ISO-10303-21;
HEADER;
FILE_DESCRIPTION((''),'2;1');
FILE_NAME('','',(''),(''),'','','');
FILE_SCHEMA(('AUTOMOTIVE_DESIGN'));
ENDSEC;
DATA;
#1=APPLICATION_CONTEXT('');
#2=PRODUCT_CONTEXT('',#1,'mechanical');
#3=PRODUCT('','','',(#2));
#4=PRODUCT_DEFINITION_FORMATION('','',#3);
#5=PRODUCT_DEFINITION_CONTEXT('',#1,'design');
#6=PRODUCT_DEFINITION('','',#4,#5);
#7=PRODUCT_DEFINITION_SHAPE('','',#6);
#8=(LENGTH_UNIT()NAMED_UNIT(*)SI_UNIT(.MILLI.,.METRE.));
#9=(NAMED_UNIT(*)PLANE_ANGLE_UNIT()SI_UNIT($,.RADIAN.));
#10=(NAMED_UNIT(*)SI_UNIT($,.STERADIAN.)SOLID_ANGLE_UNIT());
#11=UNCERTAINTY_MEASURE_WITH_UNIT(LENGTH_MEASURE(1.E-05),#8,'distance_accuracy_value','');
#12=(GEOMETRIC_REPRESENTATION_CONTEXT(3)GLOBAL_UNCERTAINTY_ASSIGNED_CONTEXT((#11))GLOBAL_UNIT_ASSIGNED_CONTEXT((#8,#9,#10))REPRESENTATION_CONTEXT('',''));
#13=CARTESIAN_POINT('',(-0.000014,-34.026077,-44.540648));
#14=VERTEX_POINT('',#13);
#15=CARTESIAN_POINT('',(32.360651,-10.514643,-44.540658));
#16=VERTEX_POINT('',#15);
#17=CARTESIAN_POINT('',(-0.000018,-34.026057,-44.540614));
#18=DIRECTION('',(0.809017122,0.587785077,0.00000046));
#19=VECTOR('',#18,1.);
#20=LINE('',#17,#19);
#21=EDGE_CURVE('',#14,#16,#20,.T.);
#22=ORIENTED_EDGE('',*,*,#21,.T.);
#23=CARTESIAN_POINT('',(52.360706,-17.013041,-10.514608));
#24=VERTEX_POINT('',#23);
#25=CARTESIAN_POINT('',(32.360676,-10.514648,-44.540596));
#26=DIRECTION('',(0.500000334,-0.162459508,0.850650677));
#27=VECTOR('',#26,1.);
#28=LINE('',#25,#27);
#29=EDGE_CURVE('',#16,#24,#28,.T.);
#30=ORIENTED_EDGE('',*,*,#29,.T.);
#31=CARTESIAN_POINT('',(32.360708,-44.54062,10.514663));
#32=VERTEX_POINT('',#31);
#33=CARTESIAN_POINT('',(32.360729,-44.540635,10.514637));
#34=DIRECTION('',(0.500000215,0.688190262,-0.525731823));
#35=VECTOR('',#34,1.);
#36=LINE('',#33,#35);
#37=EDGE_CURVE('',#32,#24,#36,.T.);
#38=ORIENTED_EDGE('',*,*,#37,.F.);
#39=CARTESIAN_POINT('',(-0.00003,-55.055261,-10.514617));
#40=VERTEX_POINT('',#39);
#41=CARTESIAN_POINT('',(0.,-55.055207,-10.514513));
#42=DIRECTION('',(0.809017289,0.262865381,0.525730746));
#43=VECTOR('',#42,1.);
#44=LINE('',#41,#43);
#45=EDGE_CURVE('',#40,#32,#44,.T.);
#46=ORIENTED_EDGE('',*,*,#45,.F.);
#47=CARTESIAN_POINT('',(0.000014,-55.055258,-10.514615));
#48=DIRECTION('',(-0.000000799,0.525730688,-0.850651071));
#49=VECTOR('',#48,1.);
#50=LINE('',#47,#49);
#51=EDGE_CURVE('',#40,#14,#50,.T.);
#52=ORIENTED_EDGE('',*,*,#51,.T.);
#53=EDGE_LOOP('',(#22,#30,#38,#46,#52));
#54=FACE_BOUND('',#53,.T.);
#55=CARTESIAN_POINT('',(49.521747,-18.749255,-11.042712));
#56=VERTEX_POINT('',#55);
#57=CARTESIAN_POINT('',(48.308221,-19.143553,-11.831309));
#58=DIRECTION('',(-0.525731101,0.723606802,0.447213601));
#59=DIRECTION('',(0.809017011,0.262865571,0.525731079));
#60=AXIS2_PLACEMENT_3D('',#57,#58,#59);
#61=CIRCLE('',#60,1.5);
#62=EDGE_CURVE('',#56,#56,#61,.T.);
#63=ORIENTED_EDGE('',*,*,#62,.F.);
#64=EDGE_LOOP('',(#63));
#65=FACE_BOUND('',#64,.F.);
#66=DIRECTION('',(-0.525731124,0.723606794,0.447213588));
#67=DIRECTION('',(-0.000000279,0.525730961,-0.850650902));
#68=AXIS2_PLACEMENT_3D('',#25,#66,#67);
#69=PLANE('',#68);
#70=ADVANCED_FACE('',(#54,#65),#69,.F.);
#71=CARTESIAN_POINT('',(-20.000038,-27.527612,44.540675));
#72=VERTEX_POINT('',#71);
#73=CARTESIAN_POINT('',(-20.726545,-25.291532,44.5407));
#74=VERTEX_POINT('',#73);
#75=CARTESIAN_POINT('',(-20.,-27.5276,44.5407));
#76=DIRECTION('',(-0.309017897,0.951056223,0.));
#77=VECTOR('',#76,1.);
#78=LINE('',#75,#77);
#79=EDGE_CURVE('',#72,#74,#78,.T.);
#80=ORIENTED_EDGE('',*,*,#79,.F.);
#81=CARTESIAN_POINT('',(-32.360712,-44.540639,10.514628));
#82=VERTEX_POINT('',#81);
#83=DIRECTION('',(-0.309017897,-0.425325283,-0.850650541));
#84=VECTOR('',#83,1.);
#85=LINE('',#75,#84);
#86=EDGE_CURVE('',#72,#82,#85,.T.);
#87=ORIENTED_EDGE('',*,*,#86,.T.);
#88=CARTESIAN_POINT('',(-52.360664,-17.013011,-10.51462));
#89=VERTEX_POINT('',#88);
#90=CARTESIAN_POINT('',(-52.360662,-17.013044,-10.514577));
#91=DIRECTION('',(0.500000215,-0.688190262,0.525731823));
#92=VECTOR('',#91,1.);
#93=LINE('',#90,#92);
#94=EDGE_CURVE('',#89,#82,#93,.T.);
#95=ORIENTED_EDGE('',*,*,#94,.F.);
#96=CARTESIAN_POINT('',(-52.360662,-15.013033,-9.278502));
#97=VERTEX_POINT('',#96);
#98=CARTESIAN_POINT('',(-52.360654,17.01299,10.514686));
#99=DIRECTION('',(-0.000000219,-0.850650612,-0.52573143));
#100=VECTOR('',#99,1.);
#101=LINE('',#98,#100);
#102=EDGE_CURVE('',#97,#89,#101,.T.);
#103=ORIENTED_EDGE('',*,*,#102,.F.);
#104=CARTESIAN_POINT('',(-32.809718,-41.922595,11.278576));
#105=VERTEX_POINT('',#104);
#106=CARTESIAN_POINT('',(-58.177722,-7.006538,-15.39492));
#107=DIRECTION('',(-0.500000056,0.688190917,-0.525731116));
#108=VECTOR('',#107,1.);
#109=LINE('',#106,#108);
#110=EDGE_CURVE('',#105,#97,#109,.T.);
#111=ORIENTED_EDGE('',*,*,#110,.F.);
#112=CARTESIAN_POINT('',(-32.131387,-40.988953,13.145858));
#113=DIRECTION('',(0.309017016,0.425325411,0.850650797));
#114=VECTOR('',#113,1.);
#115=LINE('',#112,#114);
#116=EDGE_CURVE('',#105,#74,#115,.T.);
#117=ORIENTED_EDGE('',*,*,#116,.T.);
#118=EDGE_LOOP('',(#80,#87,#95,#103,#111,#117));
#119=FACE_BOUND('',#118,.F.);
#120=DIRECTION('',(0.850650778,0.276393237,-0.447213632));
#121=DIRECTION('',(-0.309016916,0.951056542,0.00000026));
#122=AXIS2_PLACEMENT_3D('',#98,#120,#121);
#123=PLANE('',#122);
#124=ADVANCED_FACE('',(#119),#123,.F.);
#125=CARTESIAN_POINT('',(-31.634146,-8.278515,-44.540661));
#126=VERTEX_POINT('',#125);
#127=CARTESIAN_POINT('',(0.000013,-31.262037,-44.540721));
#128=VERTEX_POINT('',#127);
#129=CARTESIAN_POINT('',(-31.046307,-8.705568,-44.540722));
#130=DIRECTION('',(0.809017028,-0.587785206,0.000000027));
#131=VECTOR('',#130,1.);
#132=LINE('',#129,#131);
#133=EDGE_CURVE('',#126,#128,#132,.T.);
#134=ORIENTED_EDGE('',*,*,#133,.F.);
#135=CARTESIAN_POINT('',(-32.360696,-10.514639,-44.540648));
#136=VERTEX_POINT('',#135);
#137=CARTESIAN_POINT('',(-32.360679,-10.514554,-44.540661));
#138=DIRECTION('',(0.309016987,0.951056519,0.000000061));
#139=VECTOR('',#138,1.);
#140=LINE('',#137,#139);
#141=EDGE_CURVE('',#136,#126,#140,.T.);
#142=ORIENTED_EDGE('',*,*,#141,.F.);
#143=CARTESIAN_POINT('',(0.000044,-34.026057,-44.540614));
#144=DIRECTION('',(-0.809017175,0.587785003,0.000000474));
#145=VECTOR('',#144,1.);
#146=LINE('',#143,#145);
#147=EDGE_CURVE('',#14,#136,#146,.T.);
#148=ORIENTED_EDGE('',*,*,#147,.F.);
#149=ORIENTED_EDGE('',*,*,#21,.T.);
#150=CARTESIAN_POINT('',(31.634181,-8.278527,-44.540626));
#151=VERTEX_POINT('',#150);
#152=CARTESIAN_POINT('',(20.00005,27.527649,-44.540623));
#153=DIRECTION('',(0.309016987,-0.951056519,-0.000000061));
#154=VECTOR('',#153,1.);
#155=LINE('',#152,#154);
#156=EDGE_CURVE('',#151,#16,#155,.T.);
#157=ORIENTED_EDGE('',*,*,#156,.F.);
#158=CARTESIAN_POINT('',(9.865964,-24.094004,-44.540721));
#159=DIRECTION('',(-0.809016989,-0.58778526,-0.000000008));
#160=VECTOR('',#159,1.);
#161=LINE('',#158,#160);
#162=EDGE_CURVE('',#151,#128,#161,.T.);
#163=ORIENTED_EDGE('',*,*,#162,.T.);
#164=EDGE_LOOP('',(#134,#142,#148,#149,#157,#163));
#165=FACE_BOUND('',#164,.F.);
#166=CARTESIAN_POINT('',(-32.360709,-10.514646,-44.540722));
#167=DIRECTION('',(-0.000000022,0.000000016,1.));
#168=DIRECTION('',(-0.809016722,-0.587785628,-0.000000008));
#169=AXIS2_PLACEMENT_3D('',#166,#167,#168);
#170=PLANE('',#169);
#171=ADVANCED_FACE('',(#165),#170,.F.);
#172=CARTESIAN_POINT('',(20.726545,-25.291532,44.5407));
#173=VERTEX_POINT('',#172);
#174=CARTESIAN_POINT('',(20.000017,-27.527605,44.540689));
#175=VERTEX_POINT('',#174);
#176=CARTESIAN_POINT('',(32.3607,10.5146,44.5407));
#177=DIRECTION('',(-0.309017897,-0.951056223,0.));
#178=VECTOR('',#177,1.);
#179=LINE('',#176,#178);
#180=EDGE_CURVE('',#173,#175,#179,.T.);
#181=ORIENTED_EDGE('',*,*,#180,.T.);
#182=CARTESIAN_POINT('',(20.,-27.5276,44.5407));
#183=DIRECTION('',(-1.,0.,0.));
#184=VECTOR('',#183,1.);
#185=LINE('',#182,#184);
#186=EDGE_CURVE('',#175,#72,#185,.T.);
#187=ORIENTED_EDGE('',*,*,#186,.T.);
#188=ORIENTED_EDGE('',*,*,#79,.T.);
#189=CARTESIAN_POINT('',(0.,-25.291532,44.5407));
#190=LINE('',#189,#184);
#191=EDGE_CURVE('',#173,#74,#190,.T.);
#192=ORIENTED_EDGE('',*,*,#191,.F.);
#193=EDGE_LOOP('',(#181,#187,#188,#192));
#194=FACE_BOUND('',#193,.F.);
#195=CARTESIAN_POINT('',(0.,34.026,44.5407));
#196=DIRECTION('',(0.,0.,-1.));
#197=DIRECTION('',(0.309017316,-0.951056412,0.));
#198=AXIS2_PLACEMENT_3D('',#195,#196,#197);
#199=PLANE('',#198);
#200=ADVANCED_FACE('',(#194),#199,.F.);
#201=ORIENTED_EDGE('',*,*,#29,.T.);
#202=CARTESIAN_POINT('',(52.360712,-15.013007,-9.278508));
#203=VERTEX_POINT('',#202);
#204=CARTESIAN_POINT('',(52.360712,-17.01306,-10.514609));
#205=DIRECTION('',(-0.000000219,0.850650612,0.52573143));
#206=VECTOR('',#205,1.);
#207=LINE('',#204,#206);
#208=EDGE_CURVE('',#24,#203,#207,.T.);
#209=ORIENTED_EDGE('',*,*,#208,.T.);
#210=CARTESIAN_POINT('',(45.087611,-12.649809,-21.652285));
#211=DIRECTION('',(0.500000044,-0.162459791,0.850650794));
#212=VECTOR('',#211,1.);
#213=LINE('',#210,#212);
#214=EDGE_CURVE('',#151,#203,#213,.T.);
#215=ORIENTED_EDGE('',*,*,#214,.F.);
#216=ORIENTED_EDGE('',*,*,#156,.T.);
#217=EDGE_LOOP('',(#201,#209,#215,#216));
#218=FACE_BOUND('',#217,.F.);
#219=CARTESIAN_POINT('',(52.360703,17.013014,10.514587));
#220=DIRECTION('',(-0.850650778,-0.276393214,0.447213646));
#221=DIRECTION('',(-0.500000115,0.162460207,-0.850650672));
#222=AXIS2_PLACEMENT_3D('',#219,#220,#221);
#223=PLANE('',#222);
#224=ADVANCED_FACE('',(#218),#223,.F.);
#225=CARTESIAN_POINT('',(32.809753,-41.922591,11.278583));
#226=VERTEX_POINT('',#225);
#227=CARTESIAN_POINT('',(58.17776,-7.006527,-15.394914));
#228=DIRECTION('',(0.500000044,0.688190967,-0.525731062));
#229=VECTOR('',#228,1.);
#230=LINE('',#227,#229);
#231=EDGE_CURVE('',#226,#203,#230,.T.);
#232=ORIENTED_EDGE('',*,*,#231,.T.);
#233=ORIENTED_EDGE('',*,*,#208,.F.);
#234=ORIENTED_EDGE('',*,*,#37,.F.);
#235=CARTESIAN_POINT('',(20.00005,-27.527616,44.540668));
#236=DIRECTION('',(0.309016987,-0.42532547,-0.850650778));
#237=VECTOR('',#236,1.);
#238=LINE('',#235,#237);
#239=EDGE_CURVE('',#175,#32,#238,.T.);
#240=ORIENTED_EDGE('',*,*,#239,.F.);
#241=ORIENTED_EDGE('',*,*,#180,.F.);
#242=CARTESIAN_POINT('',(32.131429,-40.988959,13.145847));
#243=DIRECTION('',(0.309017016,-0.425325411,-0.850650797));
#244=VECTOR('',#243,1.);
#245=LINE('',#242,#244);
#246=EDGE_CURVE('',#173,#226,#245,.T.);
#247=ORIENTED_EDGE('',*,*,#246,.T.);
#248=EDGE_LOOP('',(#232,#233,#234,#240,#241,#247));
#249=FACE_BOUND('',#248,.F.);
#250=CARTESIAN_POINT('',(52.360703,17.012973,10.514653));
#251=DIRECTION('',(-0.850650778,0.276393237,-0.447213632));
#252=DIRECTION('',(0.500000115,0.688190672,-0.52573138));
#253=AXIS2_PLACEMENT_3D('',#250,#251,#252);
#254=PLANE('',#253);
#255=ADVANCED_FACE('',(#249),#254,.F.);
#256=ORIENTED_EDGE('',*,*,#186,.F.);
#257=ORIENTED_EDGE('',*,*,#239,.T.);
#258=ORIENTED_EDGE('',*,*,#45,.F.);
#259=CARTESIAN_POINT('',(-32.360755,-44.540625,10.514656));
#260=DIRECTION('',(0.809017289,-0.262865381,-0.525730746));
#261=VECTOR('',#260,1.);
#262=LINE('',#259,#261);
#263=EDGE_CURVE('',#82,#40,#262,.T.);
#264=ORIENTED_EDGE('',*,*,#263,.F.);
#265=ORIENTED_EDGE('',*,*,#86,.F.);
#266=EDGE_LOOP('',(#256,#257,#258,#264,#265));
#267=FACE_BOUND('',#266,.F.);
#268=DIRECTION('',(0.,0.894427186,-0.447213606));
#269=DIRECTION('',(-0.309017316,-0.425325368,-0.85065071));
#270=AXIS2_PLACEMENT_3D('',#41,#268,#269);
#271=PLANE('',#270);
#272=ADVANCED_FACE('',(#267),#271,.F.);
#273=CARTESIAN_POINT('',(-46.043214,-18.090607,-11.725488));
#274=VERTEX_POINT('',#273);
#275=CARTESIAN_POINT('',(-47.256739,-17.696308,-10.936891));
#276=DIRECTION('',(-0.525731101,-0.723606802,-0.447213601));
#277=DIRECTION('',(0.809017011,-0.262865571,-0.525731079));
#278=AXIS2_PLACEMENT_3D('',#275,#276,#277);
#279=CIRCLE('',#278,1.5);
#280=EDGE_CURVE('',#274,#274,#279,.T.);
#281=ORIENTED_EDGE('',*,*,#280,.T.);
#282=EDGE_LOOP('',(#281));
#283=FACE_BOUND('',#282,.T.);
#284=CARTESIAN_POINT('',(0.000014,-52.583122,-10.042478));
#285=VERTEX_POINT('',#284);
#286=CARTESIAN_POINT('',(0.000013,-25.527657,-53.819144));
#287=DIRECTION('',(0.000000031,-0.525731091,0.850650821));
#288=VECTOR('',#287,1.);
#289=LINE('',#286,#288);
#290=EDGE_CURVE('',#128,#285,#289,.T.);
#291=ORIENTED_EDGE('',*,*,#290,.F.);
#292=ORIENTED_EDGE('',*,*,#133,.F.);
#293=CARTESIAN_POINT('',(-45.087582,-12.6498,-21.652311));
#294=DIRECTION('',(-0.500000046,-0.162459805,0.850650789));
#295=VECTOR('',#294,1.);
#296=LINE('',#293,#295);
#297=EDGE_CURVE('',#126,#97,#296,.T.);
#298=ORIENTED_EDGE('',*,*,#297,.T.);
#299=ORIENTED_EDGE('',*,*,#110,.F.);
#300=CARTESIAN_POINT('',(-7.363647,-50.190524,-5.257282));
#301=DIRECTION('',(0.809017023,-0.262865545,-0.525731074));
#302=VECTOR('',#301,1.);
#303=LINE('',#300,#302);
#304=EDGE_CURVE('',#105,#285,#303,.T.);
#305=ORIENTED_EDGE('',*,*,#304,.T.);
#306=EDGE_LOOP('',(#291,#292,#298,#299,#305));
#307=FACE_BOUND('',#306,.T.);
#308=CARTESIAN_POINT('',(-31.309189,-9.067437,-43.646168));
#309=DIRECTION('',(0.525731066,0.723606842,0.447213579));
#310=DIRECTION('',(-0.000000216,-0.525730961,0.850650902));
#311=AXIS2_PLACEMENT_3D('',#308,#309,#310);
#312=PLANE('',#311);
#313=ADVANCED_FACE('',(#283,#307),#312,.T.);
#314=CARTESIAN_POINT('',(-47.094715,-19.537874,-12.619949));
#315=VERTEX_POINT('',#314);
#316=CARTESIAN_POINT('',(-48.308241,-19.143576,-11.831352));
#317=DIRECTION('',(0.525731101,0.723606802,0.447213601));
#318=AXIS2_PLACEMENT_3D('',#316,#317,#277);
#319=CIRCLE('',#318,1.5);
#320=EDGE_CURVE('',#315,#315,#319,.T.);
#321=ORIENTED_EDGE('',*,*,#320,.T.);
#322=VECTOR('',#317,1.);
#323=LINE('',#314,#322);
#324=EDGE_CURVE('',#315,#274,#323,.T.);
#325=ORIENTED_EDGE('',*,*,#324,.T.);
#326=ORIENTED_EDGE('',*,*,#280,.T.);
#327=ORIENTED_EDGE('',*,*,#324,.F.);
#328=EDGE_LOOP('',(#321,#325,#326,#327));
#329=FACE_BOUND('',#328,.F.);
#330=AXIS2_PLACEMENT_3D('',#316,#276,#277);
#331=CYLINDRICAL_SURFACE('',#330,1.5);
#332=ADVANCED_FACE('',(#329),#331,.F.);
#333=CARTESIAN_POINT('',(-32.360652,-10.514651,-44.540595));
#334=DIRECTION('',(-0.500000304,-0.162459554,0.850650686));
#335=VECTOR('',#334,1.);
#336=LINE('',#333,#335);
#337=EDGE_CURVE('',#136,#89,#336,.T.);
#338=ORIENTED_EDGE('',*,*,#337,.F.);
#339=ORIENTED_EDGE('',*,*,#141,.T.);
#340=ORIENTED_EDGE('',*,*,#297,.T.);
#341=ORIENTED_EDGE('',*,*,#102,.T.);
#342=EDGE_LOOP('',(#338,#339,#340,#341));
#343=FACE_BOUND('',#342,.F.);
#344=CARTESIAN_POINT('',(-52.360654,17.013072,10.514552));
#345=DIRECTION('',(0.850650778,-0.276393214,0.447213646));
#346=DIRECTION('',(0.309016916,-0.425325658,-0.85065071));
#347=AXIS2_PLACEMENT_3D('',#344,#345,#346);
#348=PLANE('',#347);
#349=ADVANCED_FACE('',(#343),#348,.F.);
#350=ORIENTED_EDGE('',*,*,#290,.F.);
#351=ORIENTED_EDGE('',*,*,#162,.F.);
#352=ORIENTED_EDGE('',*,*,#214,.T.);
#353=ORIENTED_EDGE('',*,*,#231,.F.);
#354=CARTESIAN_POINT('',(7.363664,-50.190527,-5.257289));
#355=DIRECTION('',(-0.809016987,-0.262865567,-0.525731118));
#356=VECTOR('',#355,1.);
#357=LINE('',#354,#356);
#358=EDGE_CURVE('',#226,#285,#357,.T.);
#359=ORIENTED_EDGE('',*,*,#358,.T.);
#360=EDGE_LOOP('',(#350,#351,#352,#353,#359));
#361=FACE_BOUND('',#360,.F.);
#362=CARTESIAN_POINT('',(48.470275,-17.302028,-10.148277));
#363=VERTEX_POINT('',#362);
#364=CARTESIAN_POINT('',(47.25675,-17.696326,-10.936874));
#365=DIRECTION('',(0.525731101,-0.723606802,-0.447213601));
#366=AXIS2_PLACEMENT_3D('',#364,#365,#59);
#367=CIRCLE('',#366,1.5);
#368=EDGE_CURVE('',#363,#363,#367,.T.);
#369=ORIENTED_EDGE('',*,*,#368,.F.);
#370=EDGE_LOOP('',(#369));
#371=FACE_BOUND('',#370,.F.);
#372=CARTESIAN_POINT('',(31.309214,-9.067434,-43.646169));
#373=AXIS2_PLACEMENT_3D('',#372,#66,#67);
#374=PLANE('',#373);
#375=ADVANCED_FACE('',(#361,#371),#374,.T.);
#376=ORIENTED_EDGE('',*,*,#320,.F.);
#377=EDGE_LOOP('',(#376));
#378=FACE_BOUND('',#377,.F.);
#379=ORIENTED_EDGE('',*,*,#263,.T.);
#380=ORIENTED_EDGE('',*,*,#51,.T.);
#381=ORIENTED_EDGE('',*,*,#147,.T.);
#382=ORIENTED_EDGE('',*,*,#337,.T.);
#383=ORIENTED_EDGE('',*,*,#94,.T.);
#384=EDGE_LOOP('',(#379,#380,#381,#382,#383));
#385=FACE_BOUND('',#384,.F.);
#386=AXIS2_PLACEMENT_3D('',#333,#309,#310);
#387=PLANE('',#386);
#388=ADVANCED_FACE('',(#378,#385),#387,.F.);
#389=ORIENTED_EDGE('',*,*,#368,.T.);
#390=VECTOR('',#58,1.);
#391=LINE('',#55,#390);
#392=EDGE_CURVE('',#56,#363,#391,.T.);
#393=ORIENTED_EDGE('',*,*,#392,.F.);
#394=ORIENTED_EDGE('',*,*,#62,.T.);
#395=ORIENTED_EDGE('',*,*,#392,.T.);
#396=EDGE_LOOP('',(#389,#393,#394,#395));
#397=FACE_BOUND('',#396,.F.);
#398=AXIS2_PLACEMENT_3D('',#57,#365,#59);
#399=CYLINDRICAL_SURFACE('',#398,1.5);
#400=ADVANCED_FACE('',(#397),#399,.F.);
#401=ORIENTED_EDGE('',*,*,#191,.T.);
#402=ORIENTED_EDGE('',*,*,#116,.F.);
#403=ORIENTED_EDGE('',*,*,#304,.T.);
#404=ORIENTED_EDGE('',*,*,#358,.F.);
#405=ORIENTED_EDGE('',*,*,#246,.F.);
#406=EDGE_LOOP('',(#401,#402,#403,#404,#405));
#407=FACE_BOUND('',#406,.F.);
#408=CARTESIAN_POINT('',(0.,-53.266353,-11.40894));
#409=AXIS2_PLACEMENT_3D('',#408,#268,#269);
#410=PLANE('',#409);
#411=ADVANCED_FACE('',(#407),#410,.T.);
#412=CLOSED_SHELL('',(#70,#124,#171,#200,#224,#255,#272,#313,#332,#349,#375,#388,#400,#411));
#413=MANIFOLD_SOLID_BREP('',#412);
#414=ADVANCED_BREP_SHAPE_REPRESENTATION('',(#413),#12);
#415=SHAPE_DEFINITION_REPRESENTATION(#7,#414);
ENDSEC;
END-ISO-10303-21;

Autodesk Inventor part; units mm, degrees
ref_plane "YZ Plane" through (0, 0, 0) normal (1, 0, 0) x (0, 1, 0)
ref_plane "XZ Plane" through (0, 0, 0) normal (0, 1, 0) x (-1, 0, 0)
ref_plane "Work Plane1" through (0, 0, 44.5407) normal (0, 0, 1) x (1, 0, 0)
sketch "Sketch2" plane through (0, 0, 44.5407) normal (0, 0, 1) x (1, 0, 0)
  line L0 (0, 34.026) -> (32.3607, 10.5146)
  line L1 (32.3607, 10.5146) -> (20, -27.5276)
  line L2 (20, -27.5276) -> (-20, -27.5276)
  line L3 (-20, -27.5276) -> (-32.3607, 10.5146)
  line L4 (-32.3607, 10.5146) -> (0, 34.026)
  point P0 (0, 0)
  point P1 (0, 0)
  dimension "d2" = 40
loft "Loft1" add profiles "Sketch2" section 2 point at (0, 0, 0)
mirror "Mirror1" about plane through (32.3607, 10.5146, 44.5407) normal (0.809017, -0.2628656, -0.5257311) of "Loft1"
mirror "Mirror2" about plane through (20, -27.5276, 44.5407) normal (0, -0.8506508, -0.5257311) of "Loft1"
mirror "Mirror3" about plane through (-20, -27.5276, 44.5407) normal (-0.809017, -0.2628656, -0.5257311) of "Loft1"
mirror "Mirror4" about plane through (-32.3607, 10.5146, 44.5407) normal (-0.5, 0.688191, -0.5257311) of "Loft1"
mirror "Mirror5" about plane through (0, 34.026, 44.5407) normal (0.5, 0.688191, -0.5257311) of "Loft1"
mirror "Mirror6" about plane through (-52.3607, -17.013, -10.5146) normal (0.309017, -0.4253254, -0.8506508) of "Loft1", "Mirror3"
mirror "Mirror7" about plane through (-52.3607, 17.013, 10.5146) normal (0, 0.5257311, -0.8506508) of "Loft1", "Mirror3"
mirror "Mirror8" about plane through (52.3607, -17.013, -10.5146) normal (0, 0.5257311, -0.8506508) of "Loft1", "Mirror1"
mirror "Mirror9" about plane through (20, 27.5276, -44.5407) normal (-0.809017, -0.2628656, -0.5257311) of "Loft1", "Mirror1", "Mirror8"
shell "Shell1" thickness 2 removed faces 9 at (-17.4536, 35.3648, 21.8566) at (0, 36.7035, -26.1889) at (21.5738, 29.6938, 26.1889) at (-6.6667, -2.1661, 44.5407) at (39.0273, -5.671, 21.8566) at (39.0273, 17.013, -14.8469) at (-4.1202, -5.671, -44.5407) at (-41.5738, 9.1759, -14.8469) at (-39.0273, -5.671, 21.8566)
sketch "Sketch3" plane through (-32.3607, -44.5407, 10.5146) normal (-0.5257311, -0.7236068, -0.4472136) x (0.809017, -0.2628656, -0.5257311)
  line L0 (-13.5363, -38.4242) -> (20, -62.7897) projected
  line L1 (-13.5363, -38.4242) -> (-8.0063, -42.442)
  line L2 (-1.4531, -1.2361) -> (-13.5363, -38.4242) projected
  line L3 (-13.5363, -38.4242) -> (-11.5295, -32.2482)
  line L4 (-13.5363, -38.4242) -> (-7.8299, -36.5701)
  circle A0 centre (-7.8299, -36.5701) radius 1.5
  point P0 (20, -27.5276)
  dimension "d8" = 6
  dimension "d9" = 54
  dimension "d10" = 108
  dimension "d11" = 3
extrude "Extrusion1" cut sketch "Sketch3" against normal through all
sketch "Sketch4" plane through (0, -55.0553, -10.5146) normal (0.5257311, -0.7236068, -0.4472136) x (0.809017, 0.2628656, 0.5257311)
  line L0 (52.3607, -38.0423) -> (53.5363, -38.4242) projected
  line L1 (53.5363, -38.4242) -> (50.6191, -40.5437)
  line L2 (20, -62.7897) -> (53.5363, -38.4242) projected
  line L3 (53.5363, -38.4242) -> (53.5363, -38.4242)
  line L4 (53.5363, -38.4242) -> (41.4531, -1.2361) projected
  line L5 (53.5363, -38.4242) -> (47.8299, -36.5701)
  circle A0 centre (47.8299, -36.5701) radius 1.5
  point P0 (20, -27.5276)
  dimension "d14" = 6
  dimension "d15" = 108
  dimension "d16" = 54
  dimension "d17" = 3
extrude "Extrusion2" cut sketch "Sketch4" against normal through all
equation "\"d9\" = 0.5 * d10"
properties part number "dodecahedron"
